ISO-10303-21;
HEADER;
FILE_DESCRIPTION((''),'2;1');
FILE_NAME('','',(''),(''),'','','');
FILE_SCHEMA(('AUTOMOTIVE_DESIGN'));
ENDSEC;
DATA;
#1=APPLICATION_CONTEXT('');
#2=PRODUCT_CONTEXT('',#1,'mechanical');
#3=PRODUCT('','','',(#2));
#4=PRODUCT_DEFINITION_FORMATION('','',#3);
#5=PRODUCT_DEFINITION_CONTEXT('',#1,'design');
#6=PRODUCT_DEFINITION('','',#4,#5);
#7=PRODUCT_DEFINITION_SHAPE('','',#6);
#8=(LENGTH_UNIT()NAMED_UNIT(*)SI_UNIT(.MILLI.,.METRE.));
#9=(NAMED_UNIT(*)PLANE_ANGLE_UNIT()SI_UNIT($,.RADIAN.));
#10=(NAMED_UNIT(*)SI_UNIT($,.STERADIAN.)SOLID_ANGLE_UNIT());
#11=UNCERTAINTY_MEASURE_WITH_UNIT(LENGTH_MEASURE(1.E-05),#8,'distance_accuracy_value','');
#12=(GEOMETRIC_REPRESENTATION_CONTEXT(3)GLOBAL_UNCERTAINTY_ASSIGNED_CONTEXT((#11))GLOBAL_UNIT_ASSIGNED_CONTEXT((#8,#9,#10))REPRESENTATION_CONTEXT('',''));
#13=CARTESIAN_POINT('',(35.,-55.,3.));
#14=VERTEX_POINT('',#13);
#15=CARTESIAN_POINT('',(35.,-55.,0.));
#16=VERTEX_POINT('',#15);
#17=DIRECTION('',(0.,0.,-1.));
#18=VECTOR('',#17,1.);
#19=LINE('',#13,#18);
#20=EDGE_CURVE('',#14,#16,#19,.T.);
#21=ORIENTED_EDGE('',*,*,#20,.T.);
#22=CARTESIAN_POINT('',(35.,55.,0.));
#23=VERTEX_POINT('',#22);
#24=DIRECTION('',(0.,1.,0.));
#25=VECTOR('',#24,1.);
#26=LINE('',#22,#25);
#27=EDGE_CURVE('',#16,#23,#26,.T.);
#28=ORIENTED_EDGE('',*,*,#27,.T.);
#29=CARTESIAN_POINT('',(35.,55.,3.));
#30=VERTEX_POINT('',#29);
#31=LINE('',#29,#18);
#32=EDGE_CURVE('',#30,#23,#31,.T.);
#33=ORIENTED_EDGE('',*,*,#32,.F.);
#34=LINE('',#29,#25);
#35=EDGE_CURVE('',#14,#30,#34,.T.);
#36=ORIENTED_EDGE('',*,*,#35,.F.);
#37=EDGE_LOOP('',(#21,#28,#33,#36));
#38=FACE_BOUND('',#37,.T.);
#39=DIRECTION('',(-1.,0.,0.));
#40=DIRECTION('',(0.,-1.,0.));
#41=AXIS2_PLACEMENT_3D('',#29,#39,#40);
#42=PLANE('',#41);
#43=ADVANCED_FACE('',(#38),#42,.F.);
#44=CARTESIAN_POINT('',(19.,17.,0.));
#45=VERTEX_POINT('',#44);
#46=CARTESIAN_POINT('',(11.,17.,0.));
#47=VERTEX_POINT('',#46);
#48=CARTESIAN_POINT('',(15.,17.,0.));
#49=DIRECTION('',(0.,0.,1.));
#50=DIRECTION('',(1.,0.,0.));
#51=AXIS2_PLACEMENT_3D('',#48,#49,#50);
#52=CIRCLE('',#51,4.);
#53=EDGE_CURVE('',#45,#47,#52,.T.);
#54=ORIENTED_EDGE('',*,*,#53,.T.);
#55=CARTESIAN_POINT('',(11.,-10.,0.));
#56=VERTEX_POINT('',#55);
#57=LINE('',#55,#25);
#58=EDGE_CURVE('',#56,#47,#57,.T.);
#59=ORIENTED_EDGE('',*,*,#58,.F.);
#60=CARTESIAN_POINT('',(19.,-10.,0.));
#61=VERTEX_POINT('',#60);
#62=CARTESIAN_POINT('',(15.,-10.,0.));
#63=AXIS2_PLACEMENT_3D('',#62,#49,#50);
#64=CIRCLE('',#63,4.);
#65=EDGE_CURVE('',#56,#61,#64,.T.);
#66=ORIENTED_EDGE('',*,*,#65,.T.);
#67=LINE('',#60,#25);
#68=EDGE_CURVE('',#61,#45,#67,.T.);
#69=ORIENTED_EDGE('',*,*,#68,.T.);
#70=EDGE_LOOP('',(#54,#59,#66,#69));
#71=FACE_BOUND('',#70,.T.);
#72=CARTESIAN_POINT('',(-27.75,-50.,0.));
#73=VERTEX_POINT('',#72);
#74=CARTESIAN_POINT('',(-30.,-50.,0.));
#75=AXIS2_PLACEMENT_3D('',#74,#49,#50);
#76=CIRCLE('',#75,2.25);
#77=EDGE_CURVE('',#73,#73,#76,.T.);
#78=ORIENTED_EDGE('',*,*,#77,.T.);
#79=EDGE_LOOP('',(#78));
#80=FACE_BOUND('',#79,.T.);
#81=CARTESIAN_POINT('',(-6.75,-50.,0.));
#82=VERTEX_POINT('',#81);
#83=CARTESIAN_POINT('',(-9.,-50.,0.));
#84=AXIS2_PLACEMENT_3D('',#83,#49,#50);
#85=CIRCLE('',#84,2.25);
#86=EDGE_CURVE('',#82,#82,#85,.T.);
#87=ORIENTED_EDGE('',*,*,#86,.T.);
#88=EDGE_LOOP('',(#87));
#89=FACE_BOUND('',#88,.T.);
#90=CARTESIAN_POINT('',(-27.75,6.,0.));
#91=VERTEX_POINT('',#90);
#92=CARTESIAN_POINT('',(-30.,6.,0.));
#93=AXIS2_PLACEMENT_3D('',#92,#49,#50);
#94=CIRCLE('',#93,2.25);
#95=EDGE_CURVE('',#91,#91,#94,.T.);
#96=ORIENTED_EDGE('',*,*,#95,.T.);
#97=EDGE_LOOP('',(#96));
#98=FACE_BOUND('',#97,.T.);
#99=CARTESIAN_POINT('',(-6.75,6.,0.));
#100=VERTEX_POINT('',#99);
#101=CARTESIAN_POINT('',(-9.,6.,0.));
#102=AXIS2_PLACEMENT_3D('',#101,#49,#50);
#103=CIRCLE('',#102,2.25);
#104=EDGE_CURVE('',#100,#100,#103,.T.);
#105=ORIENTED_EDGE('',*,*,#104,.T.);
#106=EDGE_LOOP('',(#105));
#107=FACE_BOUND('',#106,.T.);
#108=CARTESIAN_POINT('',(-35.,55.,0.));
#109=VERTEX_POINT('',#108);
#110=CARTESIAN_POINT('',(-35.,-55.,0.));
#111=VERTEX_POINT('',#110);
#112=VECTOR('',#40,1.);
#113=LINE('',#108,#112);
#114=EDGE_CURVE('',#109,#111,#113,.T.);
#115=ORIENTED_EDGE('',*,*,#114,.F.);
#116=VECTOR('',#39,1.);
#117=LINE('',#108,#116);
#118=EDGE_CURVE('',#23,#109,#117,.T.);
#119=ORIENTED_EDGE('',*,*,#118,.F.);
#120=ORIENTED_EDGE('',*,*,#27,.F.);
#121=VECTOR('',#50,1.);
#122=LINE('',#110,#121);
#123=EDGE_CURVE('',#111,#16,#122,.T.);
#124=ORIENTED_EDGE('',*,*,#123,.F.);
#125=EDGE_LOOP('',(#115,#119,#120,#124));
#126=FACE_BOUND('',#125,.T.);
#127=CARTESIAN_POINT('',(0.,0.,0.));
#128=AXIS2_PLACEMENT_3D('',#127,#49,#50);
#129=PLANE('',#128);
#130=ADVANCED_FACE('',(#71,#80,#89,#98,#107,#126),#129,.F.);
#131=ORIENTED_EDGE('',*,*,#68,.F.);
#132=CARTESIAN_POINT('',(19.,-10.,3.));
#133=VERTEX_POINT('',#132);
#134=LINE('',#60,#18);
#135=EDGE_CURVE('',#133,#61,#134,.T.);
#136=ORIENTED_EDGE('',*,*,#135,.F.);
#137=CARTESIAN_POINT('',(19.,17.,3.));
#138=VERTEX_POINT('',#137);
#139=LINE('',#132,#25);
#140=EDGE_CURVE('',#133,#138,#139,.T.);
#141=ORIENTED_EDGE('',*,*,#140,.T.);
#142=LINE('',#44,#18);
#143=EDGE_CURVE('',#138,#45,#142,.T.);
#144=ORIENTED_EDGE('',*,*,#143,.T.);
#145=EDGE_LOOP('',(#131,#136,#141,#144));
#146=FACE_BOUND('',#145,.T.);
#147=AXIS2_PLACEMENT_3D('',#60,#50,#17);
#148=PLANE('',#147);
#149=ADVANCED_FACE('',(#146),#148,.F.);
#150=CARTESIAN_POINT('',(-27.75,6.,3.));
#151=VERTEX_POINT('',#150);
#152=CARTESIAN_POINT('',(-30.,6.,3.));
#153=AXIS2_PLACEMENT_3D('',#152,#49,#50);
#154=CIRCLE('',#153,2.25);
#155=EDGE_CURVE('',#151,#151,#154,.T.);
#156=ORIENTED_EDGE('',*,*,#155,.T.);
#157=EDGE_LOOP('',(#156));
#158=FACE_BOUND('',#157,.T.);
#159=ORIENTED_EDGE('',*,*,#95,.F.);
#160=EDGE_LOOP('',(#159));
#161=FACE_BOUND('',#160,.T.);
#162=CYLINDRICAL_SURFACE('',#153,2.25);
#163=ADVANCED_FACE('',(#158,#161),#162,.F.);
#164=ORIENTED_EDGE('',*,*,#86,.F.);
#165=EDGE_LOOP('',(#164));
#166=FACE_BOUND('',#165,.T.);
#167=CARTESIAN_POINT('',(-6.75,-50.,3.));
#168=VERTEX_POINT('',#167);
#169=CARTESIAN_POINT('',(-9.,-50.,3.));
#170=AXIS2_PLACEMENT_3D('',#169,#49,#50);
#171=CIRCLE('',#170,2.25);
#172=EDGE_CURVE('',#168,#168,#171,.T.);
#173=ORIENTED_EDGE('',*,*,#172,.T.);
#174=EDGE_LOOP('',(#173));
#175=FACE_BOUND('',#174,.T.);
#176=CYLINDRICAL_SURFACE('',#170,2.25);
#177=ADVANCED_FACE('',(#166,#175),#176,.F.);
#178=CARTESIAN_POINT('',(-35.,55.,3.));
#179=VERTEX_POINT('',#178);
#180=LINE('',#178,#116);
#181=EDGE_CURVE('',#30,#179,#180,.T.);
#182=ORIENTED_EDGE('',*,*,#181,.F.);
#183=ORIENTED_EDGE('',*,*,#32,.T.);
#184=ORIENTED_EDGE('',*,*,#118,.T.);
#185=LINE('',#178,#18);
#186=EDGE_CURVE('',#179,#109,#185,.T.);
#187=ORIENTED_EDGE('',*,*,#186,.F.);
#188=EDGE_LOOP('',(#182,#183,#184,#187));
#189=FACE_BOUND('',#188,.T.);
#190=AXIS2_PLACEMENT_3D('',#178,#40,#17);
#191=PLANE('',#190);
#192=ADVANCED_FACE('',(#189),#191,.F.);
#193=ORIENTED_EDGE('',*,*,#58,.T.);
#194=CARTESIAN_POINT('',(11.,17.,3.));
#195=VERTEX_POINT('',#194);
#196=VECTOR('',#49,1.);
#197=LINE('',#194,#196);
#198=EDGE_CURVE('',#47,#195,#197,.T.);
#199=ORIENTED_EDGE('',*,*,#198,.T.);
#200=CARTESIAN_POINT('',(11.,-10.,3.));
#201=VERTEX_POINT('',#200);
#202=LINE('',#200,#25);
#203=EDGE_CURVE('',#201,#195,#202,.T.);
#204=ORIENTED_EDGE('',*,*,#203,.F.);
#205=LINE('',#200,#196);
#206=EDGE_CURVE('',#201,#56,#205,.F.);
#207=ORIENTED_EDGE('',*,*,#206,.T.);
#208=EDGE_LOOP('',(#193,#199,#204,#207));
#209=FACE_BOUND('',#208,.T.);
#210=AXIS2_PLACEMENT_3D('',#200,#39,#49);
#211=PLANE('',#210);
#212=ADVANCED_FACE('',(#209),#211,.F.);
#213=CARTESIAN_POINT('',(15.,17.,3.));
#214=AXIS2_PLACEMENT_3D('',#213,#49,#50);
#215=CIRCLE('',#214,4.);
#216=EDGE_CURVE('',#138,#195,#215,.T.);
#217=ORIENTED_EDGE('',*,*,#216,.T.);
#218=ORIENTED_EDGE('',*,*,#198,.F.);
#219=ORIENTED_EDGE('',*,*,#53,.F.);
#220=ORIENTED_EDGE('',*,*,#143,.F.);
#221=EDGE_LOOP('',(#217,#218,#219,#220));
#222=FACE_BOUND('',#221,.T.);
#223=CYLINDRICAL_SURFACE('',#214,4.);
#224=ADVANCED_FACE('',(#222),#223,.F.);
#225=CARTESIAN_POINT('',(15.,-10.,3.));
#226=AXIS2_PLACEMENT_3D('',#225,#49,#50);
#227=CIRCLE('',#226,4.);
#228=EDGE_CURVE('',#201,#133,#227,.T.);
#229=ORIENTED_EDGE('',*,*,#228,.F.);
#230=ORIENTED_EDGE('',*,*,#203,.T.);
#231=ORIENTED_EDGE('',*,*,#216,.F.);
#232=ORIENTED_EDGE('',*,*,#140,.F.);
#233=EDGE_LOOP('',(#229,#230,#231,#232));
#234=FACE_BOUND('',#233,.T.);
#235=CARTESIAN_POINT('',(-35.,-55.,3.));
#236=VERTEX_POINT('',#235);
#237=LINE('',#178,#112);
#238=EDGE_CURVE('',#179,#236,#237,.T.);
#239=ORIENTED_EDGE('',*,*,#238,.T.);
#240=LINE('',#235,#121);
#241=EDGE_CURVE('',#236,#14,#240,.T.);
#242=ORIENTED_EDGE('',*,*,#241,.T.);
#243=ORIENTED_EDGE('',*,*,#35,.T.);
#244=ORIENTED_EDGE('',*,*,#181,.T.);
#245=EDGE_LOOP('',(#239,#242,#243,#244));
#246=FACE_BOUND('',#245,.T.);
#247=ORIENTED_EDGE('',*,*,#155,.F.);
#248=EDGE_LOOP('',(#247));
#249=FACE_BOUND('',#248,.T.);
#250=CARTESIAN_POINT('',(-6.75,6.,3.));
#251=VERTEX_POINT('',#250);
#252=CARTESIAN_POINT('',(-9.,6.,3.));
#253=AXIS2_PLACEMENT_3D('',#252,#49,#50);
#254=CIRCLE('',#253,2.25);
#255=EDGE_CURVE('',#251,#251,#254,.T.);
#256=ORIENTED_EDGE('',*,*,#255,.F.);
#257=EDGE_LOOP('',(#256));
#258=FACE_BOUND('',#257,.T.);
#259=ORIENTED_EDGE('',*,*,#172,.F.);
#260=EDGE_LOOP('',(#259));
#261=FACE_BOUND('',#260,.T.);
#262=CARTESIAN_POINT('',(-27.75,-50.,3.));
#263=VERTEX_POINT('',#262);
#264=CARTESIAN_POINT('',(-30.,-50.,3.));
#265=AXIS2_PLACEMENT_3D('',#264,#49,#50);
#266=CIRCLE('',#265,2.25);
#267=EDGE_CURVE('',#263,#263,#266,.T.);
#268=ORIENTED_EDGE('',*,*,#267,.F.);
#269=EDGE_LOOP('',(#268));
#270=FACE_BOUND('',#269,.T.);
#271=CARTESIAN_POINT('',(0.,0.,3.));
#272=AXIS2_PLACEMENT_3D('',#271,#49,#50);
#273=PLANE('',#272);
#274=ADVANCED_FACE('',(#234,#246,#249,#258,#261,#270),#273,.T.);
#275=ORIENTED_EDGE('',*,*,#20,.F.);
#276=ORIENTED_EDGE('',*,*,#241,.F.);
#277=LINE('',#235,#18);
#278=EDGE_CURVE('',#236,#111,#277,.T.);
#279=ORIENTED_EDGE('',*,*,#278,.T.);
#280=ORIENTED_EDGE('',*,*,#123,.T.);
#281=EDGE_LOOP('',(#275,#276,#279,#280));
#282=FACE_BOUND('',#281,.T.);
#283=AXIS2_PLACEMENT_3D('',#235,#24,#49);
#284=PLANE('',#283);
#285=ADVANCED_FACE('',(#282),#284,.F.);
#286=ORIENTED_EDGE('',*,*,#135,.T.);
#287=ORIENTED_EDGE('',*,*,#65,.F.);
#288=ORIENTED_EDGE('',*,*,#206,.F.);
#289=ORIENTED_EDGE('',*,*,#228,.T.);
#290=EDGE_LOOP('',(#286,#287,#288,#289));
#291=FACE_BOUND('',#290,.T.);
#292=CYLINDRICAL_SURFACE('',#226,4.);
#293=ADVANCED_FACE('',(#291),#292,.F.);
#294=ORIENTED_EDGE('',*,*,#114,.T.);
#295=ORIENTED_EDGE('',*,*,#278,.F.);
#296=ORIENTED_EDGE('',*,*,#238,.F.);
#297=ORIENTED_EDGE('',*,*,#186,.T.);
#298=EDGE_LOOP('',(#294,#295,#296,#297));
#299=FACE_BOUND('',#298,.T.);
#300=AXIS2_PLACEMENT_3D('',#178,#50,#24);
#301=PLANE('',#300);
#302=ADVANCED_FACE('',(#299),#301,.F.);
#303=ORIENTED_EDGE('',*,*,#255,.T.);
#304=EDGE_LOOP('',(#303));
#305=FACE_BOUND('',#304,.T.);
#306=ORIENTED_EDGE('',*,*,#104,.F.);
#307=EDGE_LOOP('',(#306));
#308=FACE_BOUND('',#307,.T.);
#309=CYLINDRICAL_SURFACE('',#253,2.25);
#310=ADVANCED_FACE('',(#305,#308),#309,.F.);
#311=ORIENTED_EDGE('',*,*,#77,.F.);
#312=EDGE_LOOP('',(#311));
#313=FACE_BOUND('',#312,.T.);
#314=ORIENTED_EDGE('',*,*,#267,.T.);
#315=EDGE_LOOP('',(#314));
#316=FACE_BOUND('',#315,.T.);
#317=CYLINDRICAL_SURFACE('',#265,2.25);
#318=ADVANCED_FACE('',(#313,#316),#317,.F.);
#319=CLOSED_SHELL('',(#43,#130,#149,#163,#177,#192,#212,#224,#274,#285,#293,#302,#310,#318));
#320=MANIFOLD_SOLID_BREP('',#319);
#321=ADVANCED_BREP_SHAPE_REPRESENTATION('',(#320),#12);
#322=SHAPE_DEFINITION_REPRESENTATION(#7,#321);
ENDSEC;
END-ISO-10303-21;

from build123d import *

# Parameters (mm, degrees)
SKIZZE1_W                           = 70
SKIZZE1_H                           = 110
AUFSATZ_LINEAR_AUSTRAGEN1_DEPTH     = 3
DURCHGANGSLOCH_F_R_M41_D            = 4.5
LINEARES_MUSTER1_COUNT              = 2
LINEARES_MUSTER1_PITCH              = 56
LINEARES_MUSTER1_COUNT_DIR2         = 2
LINEARES_MUSTER1_PITCH_DIR2         = 21
F_8_0_8_DURCHMESSER_LANGLOCH4_DEPTH = 3


# Read off the part's stored shape, not the designer's step: Ø8.0 (8) Durchmesser Langloch4
with BuildPart() as part:
    # Skizze1 → Aufsatz-Linear austragen1 (new body)
    with BuildSketch(Plane.XY):
        Rectangle(SKIZZE1_W, SKIZZE1_H)
    extrude(amount=AUFSATZ_LINEAR_AUSTRAGEN1_DEPTH)

    # Durchgangsloch für M41 (through all)
    with Locations(Plane.XY.offset(3)):
        with Locations((-30, -50)):
            durchgangsloch_f_r_m41 = Hole(DURCHGANGSLOCH_F_R_M41_D / 2)

    # Lineares Muster1: Durchgangsloch f_r M41 2 × 2
    with Locations(*[(j * LINEARES_MUSTER1_PITCH_DIR2, i * LINEARES_MUSTER1_PITCH, 0) for i in range(LINEARES_MUSTER1_COUNT) for j in range(LINEARES_MUSTER1_COUNT_DIR2) if (i, j) != (0, 0)]):
        add(durchgangsloch_f_r_m41, mode=Mode.SUBTRACT)

    # Ø8.0 (8) Durchmesser Langloch4 outline → Ø8.0 (8) Durchmesser Langloch4 (cut)
    with BuildSketch(Plane.XY):
        with BuildLine():
            Line((19, -10), (19, 17))
            ThreePointArc((19, 17), (15, 21), (11, 17))
            Line((11, 17), (11, -10))
            ThreePointArc((11, -10), (15, -14), (19, -10))
        make_face()
    extrude(amount=F_8_0_8_DURCHMESSER_LANGLOCH4_DEPTH, mode=Mode.SUBTRACT)


solid = part.part
